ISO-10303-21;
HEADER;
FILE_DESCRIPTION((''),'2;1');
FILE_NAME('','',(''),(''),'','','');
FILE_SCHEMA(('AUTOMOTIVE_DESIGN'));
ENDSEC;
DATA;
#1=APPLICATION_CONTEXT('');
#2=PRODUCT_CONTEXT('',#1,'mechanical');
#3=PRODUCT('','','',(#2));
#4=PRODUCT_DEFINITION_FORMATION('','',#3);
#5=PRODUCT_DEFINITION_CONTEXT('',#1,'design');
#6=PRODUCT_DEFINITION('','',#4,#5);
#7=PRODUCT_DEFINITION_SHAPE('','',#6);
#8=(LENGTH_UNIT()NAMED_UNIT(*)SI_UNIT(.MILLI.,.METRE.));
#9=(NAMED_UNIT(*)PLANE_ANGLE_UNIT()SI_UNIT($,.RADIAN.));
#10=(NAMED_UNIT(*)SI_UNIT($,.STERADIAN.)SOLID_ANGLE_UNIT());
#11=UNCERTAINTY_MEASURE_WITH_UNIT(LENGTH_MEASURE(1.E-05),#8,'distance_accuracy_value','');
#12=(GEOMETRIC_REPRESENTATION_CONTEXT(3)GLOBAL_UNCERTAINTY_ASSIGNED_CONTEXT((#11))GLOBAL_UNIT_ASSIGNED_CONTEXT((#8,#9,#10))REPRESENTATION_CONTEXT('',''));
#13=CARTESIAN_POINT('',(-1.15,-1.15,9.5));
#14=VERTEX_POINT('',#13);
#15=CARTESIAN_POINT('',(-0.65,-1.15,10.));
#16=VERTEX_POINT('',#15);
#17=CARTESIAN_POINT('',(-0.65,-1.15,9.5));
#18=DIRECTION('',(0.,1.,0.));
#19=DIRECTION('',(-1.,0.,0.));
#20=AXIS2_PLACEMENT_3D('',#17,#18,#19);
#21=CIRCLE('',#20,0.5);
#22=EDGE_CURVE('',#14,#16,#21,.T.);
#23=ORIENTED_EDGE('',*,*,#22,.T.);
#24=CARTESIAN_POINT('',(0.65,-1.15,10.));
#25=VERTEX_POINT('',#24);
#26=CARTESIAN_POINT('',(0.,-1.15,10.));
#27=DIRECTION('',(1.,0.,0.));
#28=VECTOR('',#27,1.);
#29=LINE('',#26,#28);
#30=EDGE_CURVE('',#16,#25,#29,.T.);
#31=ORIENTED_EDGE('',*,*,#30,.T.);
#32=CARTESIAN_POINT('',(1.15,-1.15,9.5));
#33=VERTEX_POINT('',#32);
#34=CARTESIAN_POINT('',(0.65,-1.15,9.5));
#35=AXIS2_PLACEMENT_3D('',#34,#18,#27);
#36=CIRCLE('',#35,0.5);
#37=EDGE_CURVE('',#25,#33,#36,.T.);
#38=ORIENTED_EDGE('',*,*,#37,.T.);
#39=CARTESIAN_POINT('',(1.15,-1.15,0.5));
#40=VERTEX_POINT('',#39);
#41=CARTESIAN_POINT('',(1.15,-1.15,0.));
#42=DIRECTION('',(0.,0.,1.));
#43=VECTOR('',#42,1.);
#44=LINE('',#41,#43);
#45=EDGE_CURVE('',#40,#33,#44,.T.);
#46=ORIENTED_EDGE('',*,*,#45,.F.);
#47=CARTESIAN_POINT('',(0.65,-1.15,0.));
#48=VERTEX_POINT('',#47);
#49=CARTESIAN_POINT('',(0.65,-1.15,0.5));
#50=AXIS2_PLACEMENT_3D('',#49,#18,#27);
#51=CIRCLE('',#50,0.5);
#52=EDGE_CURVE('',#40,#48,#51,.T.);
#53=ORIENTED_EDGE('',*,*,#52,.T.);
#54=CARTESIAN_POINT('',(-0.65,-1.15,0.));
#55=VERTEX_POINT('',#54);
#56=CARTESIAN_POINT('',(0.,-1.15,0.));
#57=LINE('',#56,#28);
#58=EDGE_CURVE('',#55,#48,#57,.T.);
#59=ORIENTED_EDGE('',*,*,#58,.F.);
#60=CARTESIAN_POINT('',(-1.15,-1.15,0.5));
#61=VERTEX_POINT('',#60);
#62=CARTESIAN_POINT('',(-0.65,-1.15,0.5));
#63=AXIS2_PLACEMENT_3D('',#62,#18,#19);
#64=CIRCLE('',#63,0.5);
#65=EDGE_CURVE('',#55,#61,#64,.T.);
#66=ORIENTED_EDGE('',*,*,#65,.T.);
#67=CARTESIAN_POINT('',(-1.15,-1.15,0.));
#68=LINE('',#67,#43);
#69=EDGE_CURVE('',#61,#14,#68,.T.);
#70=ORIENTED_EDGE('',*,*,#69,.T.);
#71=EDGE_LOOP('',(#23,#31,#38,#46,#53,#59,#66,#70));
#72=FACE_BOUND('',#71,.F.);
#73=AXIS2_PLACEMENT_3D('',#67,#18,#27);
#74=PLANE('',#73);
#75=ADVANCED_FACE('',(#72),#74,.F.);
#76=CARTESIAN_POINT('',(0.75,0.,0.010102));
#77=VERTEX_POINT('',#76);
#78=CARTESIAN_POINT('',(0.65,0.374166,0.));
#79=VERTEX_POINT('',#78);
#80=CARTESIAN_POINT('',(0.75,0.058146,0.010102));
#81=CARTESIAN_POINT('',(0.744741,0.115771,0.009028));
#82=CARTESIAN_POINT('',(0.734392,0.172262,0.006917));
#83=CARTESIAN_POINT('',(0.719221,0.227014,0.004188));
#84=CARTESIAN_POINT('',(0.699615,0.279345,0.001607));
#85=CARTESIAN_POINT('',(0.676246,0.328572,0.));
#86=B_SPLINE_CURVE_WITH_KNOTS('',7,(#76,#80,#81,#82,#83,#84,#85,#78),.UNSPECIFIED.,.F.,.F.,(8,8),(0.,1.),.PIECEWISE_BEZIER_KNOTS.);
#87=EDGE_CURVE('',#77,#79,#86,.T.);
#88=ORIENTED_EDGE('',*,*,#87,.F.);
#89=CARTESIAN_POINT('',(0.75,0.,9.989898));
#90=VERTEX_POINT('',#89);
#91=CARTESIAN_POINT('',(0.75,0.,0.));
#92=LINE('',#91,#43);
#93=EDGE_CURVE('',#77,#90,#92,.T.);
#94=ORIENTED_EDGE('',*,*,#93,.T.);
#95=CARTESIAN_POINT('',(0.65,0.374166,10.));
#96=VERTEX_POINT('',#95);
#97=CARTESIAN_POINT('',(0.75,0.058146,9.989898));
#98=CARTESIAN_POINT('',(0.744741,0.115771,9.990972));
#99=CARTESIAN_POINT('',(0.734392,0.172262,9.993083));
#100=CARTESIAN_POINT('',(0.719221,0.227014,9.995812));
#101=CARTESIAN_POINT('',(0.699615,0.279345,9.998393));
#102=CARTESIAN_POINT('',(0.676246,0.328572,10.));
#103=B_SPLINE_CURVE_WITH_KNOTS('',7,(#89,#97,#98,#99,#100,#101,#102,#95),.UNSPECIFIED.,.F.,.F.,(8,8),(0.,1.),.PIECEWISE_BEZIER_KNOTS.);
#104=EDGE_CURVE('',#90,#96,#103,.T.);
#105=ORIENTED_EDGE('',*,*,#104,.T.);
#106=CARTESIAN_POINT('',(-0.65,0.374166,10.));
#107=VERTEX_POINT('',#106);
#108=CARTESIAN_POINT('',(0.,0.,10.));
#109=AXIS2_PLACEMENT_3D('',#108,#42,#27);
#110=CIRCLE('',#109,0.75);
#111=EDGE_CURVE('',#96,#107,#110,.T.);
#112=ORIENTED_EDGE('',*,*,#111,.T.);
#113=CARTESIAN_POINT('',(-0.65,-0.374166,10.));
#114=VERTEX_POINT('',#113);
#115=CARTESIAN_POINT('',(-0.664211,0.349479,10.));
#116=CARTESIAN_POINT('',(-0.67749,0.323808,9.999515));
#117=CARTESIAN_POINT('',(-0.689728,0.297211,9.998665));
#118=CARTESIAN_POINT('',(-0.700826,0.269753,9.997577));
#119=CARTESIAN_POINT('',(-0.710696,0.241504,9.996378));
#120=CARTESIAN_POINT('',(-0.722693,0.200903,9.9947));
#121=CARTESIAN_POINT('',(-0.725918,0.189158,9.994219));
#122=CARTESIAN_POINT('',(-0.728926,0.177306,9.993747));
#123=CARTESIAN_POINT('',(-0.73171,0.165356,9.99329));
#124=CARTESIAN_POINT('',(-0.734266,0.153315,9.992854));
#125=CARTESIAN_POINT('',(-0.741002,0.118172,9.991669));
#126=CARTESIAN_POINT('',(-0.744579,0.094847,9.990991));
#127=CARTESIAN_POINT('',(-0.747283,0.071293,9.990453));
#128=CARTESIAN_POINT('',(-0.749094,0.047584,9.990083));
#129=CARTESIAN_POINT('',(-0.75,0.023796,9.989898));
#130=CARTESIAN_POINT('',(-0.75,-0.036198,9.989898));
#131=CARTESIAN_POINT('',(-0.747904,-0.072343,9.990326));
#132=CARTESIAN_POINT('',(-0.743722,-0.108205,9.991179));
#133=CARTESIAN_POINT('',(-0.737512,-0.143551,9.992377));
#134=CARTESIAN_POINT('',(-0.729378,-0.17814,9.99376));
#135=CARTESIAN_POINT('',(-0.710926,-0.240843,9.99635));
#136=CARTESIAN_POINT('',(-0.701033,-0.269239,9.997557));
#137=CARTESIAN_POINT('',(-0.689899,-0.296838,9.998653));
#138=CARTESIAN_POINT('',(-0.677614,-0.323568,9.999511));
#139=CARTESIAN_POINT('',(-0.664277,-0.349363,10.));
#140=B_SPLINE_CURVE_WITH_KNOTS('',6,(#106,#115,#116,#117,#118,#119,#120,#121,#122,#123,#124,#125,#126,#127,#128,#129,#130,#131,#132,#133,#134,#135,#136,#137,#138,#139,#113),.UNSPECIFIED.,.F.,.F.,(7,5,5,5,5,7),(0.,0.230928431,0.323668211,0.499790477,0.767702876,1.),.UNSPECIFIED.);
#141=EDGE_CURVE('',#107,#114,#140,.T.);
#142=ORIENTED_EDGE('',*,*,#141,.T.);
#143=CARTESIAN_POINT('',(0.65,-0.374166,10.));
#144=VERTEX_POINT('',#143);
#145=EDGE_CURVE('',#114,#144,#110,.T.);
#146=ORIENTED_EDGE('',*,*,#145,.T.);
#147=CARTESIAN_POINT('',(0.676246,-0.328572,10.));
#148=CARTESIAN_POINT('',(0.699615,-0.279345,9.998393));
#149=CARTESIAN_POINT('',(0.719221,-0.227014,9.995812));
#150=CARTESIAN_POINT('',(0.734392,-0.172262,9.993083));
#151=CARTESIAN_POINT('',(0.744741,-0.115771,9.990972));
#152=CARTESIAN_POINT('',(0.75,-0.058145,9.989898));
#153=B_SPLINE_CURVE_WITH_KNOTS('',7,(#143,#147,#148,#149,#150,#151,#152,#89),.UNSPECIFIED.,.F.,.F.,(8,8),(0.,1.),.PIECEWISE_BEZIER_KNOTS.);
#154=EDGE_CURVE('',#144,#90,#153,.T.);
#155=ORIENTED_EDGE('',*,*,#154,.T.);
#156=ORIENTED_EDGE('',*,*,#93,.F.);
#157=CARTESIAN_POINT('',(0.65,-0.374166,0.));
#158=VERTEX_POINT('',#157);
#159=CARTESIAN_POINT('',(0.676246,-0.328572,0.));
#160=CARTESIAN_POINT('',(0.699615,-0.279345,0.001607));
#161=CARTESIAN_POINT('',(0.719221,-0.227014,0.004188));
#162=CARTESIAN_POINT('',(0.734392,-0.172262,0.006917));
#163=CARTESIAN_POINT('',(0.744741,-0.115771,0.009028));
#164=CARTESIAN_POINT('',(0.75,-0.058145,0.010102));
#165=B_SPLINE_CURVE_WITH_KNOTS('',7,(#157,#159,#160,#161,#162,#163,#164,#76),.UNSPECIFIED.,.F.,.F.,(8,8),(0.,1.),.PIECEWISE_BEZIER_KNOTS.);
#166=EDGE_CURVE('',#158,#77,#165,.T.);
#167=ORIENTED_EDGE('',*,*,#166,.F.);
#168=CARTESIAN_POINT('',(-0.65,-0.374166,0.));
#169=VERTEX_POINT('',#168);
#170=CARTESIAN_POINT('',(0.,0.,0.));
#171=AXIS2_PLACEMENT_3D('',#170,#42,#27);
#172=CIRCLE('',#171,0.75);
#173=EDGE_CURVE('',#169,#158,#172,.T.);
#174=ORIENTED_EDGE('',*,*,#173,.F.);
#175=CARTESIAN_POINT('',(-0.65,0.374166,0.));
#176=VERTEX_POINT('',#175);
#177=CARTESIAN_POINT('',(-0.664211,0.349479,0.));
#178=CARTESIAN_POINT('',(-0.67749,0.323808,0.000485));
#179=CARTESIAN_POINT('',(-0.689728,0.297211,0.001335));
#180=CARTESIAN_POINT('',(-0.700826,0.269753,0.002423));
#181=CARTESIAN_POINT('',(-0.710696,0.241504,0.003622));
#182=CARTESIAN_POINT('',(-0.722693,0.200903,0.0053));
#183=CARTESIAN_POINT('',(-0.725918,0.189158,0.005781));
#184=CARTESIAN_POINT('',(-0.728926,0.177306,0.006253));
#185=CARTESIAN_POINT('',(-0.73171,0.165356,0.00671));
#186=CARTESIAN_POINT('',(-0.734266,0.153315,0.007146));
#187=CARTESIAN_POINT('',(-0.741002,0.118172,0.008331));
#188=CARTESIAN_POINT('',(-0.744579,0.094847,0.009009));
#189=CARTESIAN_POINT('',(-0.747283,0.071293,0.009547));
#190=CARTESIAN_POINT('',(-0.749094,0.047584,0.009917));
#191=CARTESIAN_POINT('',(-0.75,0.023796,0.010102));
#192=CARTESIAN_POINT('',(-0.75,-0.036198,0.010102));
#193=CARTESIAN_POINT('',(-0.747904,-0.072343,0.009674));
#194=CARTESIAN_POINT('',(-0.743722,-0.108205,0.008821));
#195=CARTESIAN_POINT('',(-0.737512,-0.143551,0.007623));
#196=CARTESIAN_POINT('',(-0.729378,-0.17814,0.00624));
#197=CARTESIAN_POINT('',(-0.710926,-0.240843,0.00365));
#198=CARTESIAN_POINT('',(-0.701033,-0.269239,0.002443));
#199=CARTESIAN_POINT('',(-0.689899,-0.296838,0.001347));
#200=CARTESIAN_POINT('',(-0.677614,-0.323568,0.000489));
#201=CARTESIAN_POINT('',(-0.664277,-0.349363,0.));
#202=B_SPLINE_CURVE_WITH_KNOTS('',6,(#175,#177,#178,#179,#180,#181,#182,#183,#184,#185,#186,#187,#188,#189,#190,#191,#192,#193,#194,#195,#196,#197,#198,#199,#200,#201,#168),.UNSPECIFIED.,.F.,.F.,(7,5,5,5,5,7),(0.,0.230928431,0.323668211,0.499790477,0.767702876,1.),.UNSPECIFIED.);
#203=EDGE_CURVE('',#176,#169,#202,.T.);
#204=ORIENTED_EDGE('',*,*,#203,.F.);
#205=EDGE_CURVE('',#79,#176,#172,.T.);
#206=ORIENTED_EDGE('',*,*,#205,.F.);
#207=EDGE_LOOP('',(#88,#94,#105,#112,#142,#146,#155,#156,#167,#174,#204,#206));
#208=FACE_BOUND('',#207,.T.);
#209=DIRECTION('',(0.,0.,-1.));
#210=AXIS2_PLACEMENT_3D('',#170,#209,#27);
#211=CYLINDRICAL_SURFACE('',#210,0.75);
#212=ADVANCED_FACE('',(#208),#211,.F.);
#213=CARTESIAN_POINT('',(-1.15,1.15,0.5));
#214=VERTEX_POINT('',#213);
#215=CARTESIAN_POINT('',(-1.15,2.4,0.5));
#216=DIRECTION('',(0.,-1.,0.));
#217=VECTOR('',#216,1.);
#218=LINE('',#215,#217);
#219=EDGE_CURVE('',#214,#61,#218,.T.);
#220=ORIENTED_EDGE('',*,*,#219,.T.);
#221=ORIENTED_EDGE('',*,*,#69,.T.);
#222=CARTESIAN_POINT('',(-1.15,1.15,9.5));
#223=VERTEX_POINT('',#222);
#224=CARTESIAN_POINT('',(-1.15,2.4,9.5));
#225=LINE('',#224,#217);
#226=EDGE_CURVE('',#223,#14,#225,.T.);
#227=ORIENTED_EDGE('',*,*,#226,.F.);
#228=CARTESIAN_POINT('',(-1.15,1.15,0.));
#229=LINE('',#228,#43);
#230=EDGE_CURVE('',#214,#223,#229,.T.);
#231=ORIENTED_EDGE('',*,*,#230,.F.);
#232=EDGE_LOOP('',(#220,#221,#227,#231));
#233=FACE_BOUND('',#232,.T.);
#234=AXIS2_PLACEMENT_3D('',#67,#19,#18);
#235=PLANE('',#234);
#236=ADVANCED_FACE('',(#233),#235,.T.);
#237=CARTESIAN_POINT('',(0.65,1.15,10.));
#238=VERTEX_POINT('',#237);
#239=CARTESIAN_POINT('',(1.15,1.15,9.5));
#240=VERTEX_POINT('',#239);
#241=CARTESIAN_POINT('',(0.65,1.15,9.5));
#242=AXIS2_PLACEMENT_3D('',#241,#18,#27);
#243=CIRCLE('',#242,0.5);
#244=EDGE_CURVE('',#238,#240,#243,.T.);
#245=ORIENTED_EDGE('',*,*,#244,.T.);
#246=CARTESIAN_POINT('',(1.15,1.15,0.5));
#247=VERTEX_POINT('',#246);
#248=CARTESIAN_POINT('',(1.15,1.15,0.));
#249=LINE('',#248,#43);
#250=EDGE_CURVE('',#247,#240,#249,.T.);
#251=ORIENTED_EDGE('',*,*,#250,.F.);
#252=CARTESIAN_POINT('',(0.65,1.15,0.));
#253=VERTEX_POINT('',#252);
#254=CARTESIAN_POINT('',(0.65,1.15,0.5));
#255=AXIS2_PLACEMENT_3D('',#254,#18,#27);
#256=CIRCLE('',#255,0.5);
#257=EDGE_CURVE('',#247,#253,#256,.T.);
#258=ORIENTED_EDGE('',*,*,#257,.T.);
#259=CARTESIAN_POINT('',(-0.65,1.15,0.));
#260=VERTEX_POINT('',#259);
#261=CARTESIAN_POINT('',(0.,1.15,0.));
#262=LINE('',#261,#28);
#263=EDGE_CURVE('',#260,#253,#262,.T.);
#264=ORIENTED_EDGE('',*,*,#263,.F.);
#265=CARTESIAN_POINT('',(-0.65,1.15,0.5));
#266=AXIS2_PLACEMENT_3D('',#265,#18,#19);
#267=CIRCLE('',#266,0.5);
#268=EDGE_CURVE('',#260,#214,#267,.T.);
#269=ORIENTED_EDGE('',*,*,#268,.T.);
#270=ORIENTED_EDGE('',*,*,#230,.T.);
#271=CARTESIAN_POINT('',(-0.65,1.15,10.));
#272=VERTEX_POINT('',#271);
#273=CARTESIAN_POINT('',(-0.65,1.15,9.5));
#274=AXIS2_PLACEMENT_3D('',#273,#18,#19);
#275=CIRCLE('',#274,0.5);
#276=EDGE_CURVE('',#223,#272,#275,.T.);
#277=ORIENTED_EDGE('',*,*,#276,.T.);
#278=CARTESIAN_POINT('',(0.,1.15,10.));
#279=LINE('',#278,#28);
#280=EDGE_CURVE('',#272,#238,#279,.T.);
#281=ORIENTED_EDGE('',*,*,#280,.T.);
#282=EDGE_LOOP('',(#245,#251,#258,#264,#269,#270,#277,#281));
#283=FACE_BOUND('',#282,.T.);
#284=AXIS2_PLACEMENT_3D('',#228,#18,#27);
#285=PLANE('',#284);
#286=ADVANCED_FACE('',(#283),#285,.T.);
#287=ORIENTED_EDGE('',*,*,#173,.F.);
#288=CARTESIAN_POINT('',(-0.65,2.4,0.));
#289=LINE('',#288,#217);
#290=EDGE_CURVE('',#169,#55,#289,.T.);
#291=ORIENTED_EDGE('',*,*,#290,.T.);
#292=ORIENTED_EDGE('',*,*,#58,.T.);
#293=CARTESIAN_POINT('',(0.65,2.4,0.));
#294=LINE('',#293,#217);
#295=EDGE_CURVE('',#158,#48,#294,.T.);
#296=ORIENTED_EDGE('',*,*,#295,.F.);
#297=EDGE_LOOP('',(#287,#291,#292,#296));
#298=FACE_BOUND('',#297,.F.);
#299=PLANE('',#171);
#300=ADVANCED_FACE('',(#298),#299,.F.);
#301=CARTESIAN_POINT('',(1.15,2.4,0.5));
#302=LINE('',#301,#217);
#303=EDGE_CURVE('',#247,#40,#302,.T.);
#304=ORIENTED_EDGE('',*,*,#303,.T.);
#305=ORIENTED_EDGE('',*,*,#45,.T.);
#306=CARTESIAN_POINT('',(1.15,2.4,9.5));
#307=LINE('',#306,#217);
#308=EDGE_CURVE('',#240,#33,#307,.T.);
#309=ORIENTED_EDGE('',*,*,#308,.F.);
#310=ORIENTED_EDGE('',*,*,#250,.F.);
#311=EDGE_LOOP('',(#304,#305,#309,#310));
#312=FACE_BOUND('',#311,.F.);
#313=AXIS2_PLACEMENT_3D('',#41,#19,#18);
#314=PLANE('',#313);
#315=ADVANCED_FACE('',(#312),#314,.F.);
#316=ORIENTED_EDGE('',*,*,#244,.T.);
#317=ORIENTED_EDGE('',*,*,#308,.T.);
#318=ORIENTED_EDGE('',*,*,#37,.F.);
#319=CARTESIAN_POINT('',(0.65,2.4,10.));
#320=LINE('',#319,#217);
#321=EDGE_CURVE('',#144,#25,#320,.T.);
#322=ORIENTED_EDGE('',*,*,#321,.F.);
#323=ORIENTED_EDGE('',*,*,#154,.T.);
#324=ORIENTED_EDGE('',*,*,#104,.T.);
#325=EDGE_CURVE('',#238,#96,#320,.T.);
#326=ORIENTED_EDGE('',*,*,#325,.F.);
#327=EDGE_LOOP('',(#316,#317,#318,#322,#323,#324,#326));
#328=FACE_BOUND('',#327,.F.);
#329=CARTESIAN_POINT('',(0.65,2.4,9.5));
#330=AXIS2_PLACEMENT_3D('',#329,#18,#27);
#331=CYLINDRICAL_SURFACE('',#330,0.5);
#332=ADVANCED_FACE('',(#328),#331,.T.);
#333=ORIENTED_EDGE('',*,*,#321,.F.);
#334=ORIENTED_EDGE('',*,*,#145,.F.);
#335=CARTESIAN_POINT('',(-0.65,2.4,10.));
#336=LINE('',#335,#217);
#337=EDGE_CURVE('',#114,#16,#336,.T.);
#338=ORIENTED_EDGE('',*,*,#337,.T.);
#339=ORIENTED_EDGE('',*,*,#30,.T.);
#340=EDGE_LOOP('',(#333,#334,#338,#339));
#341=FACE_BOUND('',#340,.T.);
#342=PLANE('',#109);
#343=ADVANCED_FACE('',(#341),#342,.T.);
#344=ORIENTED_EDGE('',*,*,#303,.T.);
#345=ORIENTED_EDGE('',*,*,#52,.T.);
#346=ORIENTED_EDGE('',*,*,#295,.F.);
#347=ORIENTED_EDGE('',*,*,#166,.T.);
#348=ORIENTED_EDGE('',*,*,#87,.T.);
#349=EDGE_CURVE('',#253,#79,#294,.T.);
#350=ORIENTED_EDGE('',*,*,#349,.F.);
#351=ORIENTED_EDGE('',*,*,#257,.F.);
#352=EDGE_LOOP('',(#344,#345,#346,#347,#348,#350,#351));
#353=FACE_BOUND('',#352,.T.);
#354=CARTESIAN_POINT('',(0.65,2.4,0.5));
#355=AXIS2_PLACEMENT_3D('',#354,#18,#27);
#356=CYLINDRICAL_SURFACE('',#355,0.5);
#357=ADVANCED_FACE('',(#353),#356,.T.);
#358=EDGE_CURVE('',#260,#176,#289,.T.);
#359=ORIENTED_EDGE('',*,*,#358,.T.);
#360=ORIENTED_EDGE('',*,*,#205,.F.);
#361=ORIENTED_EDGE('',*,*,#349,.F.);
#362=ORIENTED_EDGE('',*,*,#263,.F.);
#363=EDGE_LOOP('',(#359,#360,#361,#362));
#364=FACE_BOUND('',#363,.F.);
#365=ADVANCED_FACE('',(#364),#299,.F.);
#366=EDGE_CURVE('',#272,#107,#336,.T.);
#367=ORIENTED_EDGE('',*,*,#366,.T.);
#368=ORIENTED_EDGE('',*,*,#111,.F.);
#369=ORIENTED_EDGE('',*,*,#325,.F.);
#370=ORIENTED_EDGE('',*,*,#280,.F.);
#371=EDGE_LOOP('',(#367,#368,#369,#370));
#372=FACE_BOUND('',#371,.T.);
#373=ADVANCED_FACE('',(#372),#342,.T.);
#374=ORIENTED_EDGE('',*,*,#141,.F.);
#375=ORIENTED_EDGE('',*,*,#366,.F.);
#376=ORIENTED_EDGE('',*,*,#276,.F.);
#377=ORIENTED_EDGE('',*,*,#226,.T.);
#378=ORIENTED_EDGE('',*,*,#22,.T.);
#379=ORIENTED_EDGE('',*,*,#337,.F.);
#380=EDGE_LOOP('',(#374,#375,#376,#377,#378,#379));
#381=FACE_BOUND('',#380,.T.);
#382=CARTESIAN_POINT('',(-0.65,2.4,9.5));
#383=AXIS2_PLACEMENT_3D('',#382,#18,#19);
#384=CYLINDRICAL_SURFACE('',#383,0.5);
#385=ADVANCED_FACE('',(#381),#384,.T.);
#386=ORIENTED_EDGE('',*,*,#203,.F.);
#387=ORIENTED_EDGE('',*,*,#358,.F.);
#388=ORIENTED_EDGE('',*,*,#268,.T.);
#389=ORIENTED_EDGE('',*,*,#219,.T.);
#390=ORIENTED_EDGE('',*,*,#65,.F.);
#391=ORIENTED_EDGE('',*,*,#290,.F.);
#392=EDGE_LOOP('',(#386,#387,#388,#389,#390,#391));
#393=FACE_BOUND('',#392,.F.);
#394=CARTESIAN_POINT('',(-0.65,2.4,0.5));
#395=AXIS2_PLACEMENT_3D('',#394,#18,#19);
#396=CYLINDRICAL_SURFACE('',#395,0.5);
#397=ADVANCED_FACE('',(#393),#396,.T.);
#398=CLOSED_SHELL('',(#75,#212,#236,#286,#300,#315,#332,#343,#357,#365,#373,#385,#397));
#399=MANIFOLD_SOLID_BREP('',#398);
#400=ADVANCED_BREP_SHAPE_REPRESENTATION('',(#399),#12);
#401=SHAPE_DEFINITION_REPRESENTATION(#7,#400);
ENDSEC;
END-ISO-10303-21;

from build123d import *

# Parameters (mm, degrees)
F0_W        = 2.3
F0_H        = 2.3
F0_R        = 0.75
F1_DEPTH    = 10
F2_T1_DEPTH = 4.8


# Not quite as in the source:
# - a fillet or chamfer that OpenCascade refuses, or shapes differently, is made with other operations: its cross-section is extruded or revolved along the edge and cut away or added


with BuildPart() as f1:
    # F0 (on Top) → F1 (new body)
    with BuildSketch(Plane.XY):
        Rectangle(F0_W, F0_H)
        Circle(F0_R, mode=Mode.SUBTRACT)
    extrude(amount=F1_DEPTH)

    # F2: fillet of radius 0.5 on 4 edges, made by hand

    # F2_s2 → F2_t1 (cut)
    with BuildSketch(Plane.XZ.offset(-2.4)):
        with BuildLine():
            ThreePointArc((1.15, 9.5), (1.0035533906, 9.8535533906), (0.65, 10))
            Line((0.65, 10), (1.15, 10))
            Line((1.15, 10), (1.15, 9.5))
        make_face()
        with BuildLine():
            ThreePointArc((-1.15, 9.5), (-1.0035533906, 9.8535533906), (-0.65, 10))
            Line((-0.65, 10), (-1.15, 10))
            Line((-1.15, 10), (-1.15, 9.5))
        make_face()
        with BuildLine():
            ThreePointArc((1.15, 0.5), (1.0035533906, 0.1464466094), (0.65, 0))
            Line((0.65, 0), (1.15, 0))
            Line((1.15, 0), (1.15, 0.5))
        make_face()
        with BuildLine():
            ThreePointArc((-1.15, 0.5), (-1.0035533906, 0.1464466094), (-0.65, 0))
            Line((-0.65, 0), (-1.15, 0))
            Line((-1.15, 0), (-1.15, 0.5))
        make_face()
    extrude(amount=F2_T1_DEPTH, mode=Mode.SUBTRACT)


solid = f1.part
